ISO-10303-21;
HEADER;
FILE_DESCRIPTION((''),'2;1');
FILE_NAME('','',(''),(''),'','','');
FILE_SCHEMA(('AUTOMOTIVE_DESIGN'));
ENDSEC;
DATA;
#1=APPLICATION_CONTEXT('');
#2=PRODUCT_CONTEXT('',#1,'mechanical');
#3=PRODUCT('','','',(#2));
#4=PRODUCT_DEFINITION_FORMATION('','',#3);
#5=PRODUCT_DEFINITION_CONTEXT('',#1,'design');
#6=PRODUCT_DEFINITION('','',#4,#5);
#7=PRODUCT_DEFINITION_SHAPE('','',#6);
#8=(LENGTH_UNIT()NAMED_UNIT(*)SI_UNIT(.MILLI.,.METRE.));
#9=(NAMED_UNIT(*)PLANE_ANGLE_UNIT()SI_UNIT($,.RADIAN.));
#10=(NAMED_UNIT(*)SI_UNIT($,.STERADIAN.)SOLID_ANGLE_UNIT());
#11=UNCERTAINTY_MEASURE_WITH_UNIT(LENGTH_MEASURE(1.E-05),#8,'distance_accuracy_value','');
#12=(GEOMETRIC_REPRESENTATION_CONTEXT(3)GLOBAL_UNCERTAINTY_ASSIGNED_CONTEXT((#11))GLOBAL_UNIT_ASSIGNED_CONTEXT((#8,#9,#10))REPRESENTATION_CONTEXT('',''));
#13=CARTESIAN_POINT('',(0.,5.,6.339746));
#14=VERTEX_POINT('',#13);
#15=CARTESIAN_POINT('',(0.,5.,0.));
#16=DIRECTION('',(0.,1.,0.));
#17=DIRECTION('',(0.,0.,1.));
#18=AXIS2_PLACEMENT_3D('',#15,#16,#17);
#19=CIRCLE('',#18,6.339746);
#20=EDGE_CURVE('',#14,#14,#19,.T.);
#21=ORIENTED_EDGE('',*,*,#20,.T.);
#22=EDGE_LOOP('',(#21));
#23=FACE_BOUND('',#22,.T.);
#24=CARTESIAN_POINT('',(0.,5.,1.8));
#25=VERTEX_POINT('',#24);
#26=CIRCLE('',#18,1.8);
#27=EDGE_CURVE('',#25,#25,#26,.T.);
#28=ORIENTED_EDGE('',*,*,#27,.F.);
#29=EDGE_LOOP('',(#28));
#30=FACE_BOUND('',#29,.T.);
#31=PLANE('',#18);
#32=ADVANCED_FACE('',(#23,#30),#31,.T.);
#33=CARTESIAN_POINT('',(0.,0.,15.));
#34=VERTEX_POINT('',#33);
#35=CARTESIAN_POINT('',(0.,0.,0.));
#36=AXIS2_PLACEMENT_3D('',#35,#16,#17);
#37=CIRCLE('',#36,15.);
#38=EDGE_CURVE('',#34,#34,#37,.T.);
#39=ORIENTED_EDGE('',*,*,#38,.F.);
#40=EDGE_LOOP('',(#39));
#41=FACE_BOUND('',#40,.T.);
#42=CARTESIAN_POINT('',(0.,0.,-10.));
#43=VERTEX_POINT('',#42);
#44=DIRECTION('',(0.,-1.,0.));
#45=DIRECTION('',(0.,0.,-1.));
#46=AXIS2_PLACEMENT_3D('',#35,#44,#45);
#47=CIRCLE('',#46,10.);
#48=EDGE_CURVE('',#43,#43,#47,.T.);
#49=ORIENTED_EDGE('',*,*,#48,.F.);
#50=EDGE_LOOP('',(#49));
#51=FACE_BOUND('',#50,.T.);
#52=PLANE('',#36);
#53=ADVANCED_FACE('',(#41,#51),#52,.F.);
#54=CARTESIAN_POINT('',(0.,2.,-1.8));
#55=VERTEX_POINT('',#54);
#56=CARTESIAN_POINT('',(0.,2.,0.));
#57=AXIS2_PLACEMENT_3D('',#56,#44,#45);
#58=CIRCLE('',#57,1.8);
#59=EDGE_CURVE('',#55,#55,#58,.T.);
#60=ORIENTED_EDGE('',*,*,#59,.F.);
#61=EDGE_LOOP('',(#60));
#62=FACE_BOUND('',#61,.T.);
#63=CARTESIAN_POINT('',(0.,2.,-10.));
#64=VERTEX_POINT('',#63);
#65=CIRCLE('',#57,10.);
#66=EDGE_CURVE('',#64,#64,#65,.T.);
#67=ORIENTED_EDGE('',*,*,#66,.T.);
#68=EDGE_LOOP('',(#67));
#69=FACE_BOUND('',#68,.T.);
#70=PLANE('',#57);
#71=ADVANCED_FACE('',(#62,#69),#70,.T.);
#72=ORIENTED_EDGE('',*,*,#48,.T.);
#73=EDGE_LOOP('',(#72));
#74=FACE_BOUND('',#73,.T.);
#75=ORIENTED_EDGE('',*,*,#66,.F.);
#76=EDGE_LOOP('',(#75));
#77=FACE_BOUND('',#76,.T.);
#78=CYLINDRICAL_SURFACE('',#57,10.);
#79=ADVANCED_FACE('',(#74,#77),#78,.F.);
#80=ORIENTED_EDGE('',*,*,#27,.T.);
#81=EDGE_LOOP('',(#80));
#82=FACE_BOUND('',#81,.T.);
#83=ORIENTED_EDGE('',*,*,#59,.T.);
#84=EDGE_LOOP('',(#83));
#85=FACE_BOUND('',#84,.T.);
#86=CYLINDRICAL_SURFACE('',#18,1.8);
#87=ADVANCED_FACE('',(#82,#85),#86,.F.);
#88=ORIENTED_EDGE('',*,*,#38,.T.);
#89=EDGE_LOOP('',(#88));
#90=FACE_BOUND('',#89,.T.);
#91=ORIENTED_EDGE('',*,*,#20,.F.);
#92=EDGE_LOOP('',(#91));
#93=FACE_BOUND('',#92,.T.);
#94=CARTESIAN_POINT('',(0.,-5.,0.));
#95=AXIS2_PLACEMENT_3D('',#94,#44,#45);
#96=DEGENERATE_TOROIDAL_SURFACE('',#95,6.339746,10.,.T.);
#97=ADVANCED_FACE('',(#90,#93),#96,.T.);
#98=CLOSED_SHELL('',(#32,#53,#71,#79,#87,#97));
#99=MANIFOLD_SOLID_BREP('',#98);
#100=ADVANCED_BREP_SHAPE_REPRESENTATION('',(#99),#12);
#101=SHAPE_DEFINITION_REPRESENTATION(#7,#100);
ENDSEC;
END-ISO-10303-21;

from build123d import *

# Parameters (mm, degrees)
SKETCH2_R            = 15
BOSS_EXTRUDE1_DEPTH  = 5
SKETCH3_R            = 10
CUT_EXTRUDE1_DEPTH   = 2
M3_CLEARANCE_HOLE1_D = 3.6
FILLET1_R            = 10


with BuildPart() as part:
    # Sketch2 → Boss-Extrude1 (new body)
    with BuildSketch(Plane(origin=(0, 0, 0), x_dir=(1, 0, 0), z_dir=(0, 1, 0))):
        with Locations(Location((0, 0, 0), (0, 0, 270))):
            Circle(SKETCH2_R)
    extrude(amount=BOSS_EXTRUDE1_DEPTH)

    # Sketch3 → Cut-Extrude1 (cut)
    with BuildSketch(Plane.XZ):
        with Locations(Location((0, 0, 0), (0, 0, 270))):
            Circle(SKETCH3_R)
    extrude(amount=-CUT_EXTRUDE1_DEPTH, mode=Mode.SUBTRACT)

    # M3 Clearance Hole1 (through all)
    with Locations(Plane(origin=(0, 5, 0), x_dir=(1, 0, 0), z_dir=(0, 1, 0))):
        with Locations((0, 0)):
            Hole(M3_CLEARANCE_HOLE1_D / 2)

    # Fillet1
    # the kernel refuses this fillet: 10 mm, written as the material it takes off along each edge
    with BuildSketch(Plane(origin=(0, 5, 0), x_dir=(0, 0, 1), z_dir=(-1, 0, 0))) as fillet1_piece_1:
        with BuildLine():
            CenterArc((6.339745962, -10), FILLET1_R, 30, 60)
            Line((6.339745962, 0), (6.339745962, 0.2))
            Line((6.339745962, 0.2), (15, 0.2))
            Line((15, 0.2), (15.2, 0))
            ThreePointArc((15.2, 0), (15.2, -2.5), (15.173205081, -4.9))
            Line((15.173205081, -4.9), (15, -5))
        make_face()
    revolve(axis=Axis((0, 5, 0), (0, 1, 0)), mode=Mode.SUBTRACT)


solid = part.part
